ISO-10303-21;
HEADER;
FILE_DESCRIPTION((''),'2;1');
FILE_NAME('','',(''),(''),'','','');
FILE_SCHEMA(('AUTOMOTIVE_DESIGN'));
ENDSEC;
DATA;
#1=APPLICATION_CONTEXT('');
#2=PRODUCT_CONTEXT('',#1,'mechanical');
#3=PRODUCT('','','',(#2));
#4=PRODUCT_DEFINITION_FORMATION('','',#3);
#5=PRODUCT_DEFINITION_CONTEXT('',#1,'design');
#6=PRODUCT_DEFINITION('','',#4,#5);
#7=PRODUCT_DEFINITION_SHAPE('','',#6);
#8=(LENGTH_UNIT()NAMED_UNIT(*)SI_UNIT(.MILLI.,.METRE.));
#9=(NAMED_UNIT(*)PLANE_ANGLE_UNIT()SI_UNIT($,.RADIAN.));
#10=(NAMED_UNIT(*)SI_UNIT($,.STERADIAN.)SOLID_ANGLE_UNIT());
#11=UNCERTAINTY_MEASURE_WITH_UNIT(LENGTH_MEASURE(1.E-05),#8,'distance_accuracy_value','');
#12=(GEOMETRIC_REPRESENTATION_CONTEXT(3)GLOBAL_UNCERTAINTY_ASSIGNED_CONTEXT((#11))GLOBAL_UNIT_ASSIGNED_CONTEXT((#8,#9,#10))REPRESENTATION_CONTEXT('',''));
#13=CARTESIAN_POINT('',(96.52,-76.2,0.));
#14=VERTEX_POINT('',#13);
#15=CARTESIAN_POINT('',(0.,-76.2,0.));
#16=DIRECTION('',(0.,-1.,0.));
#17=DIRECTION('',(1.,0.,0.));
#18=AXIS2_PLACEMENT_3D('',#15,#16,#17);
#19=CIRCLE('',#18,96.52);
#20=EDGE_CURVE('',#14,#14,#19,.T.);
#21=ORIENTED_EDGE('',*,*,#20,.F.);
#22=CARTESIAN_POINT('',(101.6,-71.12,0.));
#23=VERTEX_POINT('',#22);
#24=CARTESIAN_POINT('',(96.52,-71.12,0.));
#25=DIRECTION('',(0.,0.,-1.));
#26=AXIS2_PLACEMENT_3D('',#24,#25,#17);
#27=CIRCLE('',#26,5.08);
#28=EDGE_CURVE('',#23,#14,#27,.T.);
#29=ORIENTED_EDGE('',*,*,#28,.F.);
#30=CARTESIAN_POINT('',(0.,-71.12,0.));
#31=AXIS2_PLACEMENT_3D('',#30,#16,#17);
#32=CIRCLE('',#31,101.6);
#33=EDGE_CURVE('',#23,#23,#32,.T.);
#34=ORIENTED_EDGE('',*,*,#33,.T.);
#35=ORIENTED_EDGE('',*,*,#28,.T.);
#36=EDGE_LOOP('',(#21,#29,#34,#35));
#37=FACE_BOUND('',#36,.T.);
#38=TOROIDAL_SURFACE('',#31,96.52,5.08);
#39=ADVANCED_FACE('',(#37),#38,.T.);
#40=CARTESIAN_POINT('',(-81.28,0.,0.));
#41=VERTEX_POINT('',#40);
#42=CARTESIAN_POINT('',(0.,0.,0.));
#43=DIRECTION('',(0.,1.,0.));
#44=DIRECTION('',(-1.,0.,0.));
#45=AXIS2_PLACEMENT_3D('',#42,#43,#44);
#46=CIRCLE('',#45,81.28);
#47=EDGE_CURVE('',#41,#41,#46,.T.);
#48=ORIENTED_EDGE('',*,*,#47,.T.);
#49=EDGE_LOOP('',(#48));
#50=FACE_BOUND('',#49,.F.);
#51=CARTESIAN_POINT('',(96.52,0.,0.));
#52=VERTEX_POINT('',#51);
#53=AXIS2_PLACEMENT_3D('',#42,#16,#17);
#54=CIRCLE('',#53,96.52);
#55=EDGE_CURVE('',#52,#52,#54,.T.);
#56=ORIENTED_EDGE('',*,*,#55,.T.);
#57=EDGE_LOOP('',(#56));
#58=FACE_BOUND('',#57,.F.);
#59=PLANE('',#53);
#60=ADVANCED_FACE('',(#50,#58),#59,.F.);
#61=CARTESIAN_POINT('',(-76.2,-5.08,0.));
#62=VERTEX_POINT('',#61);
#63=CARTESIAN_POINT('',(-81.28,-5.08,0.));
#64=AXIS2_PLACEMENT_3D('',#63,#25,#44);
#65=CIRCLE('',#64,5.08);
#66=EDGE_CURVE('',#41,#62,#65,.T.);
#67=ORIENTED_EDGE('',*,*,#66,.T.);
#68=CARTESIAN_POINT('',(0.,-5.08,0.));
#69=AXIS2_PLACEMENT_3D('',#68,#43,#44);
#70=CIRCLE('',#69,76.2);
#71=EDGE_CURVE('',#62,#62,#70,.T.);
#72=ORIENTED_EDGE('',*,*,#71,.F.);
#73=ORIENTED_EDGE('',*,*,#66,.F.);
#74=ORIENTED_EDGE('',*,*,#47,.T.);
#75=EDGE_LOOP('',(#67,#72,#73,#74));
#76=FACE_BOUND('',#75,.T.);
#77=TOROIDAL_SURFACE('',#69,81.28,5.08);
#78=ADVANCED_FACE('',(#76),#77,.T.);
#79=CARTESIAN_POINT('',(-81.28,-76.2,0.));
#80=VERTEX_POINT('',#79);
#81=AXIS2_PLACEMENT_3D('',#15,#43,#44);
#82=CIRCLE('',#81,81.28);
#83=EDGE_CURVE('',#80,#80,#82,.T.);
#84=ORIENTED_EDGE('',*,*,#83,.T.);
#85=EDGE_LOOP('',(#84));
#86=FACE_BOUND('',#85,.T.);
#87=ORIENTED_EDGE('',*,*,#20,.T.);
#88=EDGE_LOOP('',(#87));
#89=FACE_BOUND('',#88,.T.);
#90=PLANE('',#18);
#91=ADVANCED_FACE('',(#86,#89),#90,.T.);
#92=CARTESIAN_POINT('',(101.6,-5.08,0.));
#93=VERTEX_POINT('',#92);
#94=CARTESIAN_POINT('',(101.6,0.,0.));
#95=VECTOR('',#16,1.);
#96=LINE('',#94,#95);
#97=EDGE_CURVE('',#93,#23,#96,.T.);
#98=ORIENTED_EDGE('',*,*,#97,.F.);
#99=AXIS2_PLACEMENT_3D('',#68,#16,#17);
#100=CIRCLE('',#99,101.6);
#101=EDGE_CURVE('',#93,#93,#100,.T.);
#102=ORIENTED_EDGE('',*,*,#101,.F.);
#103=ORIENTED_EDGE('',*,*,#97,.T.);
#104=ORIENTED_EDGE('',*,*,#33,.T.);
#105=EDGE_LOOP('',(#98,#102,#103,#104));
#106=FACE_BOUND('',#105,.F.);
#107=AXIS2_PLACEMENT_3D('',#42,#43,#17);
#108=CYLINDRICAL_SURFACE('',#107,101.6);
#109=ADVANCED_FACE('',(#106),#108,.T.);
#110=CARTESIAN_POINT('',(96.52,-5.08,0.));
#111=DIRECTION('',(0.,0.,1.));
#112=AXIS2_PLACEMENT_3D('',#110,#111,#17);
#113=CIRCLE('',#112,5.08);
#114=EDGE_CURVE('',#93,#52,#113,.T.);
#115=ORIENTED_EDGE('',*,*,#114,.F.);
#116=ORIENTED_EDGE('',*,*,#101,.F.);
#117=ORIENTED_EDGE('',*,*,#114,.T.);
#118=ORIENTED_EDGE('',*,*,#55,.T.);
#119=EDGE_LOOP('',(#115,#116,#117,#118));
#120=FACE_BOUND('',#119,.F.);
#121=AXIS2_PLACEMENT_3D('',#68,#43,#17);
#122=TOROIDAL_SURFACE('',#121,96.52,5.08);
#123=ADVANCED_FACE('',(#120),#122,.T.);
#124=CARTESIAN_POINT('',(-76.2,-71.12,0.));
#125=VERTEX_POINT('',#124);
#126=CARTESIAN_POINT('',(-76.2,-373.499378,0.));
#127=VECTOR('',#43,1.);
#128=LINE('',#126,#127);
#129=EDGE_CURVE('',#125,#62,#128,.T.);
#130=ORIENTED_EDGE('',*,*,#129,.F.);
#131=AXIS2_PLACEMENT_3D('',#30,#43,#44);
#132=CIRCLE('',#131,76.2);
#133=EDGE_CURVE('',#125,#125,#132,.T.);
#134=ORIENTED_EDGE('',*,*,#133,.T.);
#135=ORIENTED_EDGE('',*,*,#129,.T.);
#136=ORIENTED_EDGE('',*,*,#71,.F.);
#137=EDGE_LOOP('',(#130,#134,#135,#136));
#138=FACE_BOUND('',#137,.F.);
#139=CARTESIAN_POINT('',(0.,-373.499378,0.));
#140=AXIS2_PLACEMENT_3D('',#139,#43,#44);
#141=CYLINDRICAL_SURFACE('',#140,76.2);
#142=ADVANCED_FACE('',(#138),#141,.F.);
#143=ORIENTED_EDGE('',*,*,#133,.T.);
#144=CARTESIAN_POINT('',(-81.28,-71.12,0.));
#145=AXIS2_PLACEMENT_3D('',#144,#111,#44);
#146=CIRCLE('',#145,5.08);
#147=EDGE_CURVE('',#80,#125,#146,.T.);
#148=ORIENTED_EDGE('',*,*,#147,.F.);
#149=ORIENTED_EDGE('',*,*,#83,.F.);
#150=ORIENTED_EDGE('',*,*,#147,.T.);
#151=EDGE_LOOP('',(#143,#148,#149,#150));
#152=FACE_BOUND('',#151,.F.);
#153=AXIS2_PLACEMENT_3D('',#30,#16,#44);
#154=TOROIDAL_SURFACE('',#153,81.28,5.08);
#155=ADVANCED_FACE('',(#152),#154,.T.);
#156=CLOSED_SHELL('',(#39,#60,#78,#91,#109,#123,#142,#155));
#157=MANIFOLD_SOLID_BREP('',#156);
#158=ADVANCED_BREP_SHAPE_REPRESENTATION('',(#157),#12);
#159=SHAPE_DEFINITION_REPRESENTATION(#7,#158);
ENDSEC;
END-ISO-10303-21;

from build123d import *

# Parameters (mm, degrees)
F0_R     = 101.6
F1_DEPTH = 76.2
F3_D     = 152.4
F4_R     = 5.08


with BuildPart() as f1:
    # F0 (on Front) → F1 (new body)
    with BuildSketch(Plane.XZ):
        Circle(F0_R)
    extrude(amount=F1_DEPTH)

    # F3 (through all)
    with Locations(Plane.XZ.offset(76.2)):
        with Locations((0, 0)):
            Hole(F3_D / 2)

    # F4
    f4_edges = [f1.edges().sort_by_distance(p)[0] for p in [
        (-101.6, -76.2, 0),
        (-101.6, 0, 0),
        (-76.2, 0, 0),
        (-76.2, -76.2, 0),
    ]]
    fillet(f4_edges, radius=F4_R)


solid = f1.part
